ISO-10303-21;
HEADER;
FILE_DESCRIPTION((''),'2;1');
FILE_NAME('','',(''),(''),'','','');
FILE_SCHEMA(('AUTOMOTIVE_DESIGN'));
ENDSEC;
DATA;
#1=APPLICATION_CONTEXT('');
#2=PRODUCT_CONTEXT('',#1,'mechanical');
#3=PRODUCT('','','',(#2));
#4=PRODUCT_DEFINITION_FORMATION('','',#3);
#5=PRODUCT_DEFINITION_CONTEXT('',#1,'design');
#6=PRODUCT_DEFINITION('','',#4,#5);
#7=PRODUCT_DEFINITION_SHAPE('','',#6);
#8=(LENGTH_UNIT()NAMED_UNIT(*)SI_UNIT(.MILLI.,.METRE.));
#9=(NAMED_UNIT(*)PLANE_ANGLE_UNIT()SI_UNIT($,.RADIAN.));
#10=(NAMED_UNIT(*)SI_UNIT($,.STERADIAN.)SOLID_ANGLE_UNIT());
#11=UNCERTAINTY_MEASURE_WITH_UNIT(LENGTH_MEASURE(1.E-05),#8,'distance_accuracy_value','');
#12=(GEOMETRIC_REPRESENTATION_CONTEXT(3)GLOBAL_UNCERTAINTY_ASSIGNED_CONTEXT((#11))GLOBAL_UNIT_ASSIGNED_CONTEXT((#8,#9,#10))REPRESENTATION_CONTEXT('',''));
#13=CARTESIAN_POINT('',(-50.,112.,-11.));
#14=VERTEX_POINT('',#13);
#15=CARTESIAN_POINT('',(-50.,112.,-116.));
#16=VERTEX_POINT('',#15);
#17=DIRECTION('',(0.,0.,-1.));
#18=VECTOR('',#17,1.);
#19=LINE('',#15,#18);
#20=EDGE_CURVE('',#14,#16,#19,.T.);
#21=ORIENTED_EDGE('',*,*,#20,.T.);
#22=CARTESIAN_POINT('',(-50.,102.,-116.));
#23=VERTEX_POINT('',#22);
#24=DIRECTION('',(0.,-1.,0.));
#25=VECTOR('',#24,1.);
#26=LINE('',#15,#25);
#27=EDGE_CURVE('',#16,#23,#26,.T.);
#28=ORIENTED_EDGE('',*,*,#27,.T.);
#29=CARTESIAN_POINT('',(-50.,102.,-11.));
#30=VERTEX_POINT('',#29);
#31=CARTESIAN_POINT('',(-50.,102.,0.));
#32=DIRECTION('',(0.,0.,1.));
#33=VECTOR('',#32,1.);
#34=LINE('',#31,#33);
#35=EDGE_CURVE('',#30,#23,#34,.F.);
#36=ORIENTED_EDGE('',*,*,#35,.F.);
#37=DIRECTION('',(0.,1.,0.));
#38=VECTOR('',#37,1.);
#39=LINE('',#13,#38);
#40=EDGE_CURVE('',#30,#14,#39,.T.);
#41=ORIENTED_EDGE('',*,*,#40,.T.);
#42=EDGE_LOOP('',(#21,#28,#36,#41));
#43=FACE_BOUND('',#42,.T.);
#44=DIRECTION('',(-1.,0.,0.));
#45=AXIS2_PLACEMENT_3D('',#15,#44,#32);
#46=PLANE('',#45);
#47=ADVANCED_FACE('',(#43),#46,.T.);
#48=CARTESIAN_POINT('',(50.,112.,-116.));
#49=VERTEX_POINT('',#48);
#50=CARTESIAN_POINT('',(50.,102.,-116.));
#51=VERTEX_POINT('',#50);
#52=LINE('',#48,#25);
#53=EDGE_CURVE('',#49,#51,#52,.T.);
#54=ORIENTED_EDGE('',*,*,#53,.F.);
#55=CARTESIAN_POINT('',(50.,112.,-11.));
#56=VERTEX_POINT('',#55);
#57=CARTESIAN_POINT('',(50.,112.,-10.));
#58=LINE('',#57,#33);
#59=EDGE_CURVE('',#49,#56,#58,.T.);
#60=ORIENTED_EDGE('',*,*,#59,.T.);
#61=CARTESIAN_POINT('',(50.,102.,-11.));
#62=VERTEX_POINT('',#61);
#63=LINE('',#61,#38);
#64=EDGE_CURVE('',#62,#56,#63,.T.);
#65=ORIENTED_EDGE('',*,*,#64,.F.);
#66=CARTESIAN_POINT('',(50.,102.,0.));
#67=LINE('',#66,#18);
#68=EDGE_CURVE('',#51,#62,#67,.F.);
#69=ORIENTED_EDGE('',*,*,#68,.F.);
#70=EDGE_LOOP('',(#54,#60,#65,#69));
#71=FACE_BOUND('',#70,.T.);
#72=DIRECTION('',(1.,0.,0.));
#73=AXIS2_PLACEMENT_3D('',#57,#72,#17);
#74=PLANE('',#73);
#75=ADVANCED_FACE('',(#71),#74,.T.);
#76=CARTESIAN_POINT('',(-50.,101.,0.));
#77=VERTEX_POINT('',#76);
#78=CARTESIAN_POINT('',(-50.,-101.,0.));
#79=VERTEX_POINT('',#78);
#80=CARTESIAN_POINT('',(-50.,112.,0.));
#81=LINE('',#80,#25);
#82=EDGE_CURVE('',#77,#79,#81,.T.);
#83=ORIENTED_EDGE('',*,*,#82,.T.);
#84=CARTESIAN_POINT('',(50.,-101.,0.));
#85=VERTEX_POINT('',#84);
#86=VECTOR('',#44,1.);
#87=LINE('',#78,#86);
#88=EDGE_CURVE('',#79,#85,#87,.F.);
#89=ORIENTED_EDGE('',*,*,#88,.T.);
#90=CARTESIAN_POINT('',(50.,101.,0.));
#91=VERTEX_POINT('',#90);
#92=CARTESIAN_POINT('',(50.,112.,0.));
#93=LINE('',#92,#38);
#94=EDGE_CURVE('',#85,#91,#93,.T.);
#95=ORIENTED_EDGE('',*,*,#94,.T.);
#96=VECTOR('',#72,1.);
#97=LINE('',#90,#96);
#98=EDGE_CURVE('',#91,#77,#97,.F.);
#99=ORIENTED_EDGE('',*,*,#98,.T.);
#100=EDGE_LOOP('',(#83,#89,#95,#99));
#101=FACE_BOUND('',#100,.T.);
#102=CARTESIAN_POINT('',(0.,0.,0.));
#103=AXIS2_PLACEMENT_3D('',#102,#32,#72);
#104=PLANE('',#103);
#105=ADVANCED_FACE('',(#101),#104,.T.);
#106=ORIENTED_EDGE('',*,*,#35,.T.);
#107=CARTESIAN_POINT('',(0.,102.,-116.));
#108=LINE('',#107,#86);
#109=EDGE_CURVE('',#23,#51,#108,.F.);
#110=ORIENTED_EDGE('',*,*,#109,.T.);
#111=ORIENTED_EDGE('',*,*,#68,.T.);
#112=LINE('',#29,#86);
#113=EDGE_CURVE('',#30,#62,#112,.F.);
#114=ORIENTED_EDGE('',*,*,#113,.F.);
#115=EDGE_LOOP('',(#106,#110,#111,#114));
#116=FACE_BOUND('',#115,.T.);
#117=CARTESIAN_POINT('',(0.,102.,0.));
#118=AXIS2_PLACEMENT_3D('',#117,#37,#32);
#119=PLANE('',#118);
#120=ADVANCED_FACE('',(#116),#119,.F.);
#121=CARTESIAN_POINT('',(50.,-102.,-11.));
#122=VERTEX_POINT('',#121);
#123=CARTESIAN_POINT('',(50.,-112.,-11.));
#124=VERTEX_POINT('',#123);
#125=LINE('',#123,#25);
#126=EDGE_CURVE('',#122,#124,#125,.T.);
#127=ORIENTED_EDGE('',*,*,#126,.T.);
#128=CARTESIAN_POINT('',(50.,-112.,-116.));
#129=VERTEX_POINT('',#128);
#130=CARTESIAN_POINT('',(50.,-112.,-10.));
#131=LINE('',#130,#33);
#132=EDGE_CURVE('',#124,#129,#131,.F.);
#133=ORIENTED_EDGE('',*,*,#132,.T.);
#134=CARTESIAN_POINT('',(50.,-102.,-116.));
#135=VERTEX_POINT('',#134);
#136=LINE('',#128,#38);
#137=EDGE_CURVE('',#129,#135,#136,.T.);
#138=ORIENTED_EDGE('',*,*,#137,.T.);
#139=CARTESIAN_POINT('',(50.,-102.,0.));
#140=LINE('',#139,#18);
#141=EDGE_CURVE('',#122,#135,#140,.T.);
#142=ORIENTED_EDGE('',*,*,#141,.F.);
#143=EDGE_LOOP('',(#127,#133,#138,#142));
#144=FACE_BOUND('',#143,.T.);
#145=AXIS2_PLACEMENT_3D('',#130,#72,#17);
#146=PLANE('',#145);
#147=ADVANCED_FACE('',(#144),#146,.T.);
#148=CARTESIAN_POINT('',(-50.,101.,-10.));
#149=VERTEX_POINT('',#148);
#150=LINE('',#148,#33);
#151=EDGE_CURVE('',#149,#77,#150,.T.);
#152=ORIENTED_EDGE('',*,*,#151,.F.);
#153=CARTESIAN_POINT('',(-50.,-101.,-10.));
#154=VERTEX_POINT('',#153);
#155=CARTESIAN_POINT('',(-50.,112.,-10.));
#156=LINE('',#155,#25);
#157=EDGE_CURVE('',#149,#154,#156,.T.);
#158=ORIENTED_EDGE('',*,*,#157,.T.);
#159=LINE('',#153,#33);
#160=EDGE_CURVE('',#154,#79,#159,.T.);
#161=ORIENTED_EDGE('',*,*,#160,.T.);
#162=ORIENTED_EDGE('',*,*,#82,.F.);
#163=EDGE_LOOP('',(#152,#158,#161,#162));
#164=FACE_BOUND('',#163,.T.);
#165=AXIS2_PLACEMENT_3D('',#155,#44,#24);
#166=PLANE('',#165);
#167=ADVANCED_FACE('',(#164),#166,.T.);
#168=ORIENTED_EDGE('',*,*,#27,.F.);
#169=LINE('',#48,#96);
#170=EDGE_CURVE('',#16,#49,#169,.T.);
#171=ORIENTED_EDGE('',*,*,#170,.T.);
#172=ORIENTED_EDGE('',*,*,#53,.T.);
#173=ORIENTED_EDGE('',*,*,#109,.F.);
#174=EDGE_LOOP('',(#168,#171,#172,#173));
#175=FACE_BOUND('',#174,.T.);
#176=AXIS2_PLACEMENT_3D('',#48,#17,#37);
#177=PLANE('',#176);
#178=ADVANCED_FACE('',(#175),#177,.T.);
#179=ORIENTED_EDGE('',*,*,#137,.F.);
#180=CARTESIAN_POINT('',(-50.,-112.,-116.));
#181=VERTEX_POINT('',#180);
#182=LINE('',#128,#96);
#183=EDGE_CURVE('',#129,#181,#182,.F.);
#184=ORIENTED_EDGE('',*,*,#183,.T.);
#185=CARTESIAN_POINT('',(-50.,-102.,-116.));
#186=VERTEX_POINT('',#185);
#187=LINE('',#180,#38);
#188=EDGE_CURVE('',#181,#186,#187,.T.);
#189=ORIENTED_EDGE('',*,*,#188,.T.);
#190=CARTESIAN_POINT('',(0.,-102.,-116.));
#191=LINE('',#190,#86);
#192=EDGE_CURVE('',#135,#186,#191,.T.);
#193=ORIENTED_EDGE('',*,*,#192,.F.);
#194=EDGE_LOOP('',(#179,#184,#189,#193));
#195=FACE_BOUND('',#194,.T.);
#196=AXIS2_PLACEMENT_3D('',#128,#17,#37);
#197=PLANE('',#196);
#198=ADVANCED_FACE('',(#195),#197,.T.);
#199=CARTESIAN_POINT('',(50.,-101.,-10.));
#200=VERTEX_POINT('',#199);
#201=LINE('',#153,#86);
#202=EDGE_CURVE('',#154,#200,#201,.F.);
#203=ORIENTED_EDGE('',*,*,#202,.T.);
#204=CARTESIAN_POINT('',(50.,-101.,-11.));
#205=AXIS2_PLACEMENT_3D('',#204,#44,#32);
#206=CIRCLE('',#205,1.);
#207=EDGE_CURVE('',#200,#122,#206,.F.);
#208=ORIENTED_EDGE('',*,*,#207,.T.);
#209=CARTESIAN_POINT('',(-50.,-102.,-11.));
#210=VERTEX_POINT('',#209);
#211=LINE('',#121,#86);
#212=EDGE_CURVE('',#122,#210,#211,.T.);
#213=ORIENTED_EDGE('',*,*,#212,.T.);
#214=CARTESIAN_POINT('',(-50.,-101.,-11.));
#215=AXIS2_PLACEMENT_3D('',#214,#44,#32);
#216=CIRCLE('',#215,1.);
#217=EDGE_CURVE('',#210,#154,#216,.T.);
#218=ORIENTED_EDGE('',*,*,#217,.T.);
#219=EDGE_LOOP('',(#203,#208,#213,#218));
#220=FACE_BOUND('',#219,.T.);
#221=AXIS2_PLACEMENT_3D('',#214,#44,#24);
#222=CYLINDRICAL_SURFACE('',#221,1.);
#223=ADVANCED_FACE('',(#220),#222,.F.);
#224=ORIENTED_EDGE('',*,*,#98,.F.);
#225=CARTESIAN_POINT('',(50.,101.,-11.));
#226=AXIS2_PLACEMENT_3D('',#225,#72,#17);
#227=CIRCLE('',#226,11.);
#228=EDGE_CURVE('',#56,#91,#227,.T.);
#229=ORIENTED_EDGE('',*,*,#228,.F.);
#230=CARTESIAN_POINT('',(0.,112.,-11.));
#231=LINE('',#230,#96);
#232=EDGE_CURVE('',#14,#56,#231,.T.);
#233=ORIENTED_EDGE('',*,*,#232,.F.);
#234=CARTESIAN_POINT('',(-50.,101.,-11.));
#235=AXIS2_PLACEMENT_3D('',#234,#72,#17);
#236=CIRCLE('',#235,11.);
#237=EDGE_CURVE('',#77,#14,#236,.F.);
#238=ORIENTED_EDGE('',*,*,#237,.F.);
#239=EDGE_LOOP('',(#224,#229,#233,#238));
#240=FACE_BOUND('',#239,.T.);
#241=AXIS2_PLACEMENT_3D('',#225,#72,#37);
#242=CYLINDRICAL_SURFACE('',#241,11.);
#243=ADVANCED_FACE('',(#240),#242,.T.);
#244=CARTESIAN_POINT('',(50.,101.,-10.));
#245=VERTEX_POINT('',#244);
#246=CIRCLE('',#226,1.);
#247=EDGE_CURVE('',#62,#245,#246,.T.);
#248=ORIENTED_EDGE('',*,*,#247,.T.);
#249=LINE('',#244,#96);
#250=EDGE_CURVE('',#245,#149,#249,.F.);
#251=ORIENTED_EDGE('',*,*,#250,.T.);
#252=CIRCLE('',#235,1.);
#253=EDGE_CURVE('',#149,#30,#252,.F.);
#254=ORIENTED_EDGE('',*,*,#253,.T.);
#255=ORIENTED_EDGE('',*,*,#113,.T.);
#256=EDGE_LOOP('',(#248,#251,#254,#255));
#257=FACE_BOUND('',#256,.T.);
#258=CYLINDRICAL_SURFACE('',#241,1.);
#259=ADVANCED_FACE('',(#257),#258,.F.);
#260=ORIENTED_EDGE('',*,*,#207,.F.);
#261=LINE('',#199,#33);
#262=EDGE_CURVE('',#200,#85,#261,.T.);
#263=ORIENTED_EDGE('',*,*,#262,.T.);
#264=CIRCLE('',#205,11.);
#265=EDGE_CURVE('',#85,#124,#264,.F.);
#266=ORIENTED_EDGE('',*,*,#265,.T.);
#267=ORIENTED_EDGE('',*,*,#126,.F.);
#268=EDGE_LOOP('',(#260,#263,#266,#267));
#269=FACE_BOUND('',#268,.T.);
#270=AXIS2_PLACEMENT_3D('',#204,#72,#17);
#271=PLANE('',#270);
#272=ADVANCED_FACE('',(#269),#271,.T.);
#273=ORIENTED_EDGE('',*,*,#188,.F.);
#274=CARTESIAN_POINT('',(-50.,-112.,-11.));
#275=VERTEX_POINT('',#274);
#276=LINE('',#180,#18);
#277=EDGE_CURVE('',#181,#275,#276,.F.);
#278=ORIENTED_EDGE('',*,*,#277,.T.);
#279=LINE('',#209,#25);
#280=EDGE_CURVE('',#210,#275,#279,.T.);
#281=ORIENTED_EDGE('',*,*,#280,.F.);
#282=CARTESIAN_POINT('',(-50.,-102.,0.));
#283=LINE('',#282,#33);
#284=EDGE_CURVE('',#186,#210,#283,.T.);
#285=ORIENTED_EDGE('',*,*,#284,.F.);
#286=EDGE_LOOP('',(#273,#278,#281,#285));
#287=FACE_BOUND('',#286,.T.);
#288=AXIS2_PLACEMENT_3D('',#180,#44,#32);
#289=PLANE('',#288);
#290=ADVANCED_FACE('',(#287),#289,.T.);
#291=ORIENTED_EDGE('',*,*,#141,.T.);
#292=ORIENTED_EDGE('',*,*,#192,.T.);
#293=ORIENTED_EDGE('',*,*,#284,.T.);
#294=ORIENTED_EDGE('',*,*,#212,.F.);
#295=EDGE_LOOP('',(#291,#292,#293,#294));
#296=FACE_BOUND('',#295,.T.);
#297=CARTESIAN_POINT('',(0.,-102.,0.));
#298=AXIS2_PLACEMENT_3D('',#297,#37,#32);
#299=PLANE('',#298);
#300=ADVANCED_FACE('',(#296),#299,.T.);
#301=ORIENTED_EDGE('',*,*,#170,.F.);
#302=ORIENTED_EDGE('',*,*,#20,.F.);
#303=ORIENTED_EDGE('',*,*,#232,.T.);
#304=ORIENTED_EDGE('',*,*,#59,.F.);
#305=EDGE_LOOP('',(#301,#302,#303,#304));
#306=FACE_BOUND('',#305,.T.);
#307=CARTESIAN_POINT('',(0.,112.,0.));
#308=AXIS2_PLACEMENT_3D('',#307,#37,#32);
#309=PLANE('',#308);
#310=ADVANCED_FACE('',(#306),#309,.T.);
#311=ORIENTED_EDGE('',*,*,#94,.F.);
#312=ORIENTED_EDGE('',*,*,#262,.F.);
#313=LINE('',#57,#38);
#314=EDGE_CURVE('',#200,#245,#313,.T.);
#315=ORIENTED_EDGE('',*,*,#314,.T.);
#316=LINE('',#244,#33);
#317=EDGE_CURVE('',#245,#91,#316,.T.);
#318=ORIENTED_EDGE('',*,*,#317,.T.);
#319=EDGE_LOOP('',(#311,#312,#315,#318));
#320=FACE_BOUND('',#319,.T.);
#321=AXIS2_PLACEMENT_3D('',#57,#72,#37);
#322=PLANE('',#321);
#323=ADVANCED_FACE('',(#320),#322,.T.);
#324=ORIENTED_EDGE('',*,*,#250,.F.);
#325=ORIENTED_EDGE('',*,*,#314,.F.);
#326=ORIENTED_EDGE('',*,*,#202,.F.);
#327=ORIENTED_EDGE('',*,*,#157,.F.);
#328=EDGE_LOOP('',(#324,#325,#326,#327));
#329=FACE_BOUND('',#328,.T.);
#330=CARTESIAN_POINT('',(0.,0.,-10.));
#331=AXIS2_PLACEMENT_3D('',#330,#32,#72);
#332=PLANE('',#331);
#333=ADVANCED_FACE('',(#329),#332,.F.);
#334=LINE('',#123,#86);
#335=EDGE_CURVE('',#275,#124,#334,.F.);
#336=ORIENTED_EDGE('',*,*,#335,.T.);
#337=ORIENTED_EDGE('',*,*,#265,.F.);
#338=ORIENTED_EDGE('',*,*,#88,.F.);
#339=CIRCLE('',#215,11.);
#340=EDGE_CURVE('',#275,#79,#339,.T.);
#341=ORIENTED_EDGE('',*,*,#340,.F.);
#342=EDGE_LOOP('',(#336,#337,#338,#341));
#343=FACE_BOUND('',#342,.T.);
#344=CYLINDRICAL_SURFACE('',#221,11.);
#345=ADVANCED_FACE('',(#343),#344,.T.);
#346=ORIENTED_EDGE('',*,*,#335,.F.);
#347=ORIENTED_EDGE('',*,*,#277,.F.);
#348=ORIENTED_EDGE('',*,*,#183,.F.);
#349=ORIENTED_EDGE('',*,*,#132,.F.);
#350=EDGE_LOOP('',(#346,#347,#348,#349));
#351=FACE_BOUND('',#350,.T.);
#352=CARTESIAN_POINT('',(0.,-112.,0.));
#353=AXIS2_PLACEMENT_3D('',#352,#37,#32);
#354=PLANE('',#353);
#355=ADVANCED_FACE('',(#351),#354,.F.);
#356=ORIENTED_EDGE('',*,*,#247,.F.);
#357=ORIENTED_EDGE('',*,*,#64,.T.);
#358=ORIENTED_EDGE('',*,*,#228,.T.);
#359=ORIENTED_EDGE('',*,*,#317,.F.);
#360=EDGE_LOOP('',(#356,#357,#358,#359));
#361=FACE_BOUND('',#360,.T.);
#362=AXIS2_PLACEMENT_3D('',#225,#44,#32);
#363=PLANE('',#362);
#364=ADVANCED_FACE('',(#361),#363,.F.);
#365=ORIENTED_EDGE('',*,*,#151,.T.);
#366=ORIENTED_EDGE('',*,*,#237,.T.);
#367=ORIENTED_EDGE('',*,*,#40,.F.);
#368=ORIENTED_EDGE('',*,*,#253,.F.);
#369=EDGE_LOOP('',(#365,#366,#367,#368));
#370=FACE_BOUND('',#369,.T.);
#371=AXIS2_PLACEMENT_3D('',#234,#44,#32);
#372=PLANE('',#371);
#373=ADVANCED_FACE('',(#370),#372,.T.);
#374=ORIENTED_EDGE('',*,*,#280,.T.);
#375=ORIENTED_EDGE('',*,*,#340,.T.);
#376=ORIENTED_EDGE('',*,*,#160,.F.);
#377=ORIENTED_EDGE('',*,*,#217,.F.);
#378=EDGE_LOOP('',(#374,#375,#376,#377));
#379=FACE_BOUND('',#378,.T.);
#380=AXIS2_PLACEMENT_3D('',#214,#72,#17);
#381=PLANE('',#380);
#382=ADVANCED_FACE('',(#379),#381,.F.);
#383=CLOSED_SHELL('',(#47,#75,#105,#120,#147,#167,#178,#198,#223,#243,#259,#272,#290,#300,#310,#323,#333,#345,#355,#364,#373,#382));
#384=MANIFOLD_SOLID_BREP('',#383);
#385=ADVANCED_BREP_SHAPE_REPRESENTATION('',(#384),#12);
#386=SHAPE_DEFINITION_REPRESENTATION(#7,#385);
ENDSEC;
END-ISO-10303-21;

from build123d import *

# Parameters (mm, degrees)
SKETCH_1_W                         = 100
SKETCH_1_H                         = 224
SM_BASE_FLANGE_1_DEPTH             = 10
SM_EDGE_FLANGE_1_STRIP_W           = 42
SM_EDGE_FLANGE_1_STRIP_H           = 10
SM_EDGE_FLANGE_1_STRIP_CUT_DEPTH   = 100
SM_EDGE_FLANGE_1_STRIP_2_W         = 42
SM_EDGE_FLANGE_1_STRIP_2_H         = 10
SM_EDGE_FLANGE_1_STRIP_CUT_2_DEPTH = 100
SM_EDGE_FLANGE_1_DEPTH             = 100
SM_EDGE_FLANGE_1_BEND_DEPTH        = 100


# Sheet-metal steps are written as plain solids
with BuildPart() as part:
    # Sketch 1 → 基体-法兰1 (new body)
    with BuildSketch(Plane.XY):
        Rectangle(SKETCH_1_W, SKETCH_1_H)
    extrude(amount=-SM_BASE_FLANGE_1_DEPTH)

    # 边线-法兰1 strip (across the edge) → 边线-法兰1 strip cut (cut)
    with BuildSketch(Plane(origin=(-50, 112, -10), x_dir=(0, -1, 0), z_dir=(1, 0, 0))):
        with Locations((-10, -5)):
            Rectangle(SM_EDGE_FLANGE_1_STRIP_W, SM_EDGE_FLANGE_1_STRIP_H)
    extrude(amount=SM_EDGE_FLANGE_1_STRIP_CUT_DEPTH, mode=Mode.SUBTRACT)

    # 边线-法兰1 strip 2 (across the edge) → 边线-法兰1 strip cut 2 (cut)
    with BuildSketch(Plane(origin=(50, -112, -10), x_dir=(0, 1, 0), z_dir=(-1, 0, 0))):
        with Locations((-10, -5)):
            Rectangle(SM_EDGE_FLANGE_1_STRIP_2_W, SM_EDGE_FLANGE_1_STRIP_2_H)
    extrude(amount=SM_EDGE_FLANGE_1_STRIP_CUT_2_DEPTH, mode=Mode.SUBTRACT)

    # 边线-法兰1 section (across the edge) → 边线-法兰1 (add)
    with BuildSketch(Plane(origin=(-50, 112, -10), x_dir=(0, -1, 0), z_dir=(1, 0, 0))):
        with BuildLine():
            Line((0, 1), (0, 106))
            Line((0, 106), (10, 106))
            Line((10, 106), (10, 1))
            ThreePointArc((10, 1), (10.292893219, 0.292893219), (11, 0))
            Line((11, 0), (11, -10))
            ThreePointArc((11, -10), (3.221825407, -6.778174593), (0, 1))
        make_face()
    extrude(amount=SM_EDGE_FLANGE_1_DEPTH)

    # 边线-法兰1 section 2 (across the edge) → 边线-法兰1 bend (add)
    with BuildSketch(Plane(origin=(50, -112, -10), x_dir=(0, 1, 0), z_dir=(-1, 0, 0))):
        with BuildLine():
            Line((0, 1), (0, 106))
            Line((0, 106), (10, 106))
            Line((10, 106), (10, 1))
            ThreePointArc((10, 1), (10.292893219, 0.292893219), (11, 0))
            Line((11, 0), (11, -10))
            ThreePointArc((11, -10), (3.221825407, -6.778174593), (0, 1))
        make_face()
    extrude(amount=SM_EDGE_FLANGE_1_BEND_DEPTH)


solid = part.part
